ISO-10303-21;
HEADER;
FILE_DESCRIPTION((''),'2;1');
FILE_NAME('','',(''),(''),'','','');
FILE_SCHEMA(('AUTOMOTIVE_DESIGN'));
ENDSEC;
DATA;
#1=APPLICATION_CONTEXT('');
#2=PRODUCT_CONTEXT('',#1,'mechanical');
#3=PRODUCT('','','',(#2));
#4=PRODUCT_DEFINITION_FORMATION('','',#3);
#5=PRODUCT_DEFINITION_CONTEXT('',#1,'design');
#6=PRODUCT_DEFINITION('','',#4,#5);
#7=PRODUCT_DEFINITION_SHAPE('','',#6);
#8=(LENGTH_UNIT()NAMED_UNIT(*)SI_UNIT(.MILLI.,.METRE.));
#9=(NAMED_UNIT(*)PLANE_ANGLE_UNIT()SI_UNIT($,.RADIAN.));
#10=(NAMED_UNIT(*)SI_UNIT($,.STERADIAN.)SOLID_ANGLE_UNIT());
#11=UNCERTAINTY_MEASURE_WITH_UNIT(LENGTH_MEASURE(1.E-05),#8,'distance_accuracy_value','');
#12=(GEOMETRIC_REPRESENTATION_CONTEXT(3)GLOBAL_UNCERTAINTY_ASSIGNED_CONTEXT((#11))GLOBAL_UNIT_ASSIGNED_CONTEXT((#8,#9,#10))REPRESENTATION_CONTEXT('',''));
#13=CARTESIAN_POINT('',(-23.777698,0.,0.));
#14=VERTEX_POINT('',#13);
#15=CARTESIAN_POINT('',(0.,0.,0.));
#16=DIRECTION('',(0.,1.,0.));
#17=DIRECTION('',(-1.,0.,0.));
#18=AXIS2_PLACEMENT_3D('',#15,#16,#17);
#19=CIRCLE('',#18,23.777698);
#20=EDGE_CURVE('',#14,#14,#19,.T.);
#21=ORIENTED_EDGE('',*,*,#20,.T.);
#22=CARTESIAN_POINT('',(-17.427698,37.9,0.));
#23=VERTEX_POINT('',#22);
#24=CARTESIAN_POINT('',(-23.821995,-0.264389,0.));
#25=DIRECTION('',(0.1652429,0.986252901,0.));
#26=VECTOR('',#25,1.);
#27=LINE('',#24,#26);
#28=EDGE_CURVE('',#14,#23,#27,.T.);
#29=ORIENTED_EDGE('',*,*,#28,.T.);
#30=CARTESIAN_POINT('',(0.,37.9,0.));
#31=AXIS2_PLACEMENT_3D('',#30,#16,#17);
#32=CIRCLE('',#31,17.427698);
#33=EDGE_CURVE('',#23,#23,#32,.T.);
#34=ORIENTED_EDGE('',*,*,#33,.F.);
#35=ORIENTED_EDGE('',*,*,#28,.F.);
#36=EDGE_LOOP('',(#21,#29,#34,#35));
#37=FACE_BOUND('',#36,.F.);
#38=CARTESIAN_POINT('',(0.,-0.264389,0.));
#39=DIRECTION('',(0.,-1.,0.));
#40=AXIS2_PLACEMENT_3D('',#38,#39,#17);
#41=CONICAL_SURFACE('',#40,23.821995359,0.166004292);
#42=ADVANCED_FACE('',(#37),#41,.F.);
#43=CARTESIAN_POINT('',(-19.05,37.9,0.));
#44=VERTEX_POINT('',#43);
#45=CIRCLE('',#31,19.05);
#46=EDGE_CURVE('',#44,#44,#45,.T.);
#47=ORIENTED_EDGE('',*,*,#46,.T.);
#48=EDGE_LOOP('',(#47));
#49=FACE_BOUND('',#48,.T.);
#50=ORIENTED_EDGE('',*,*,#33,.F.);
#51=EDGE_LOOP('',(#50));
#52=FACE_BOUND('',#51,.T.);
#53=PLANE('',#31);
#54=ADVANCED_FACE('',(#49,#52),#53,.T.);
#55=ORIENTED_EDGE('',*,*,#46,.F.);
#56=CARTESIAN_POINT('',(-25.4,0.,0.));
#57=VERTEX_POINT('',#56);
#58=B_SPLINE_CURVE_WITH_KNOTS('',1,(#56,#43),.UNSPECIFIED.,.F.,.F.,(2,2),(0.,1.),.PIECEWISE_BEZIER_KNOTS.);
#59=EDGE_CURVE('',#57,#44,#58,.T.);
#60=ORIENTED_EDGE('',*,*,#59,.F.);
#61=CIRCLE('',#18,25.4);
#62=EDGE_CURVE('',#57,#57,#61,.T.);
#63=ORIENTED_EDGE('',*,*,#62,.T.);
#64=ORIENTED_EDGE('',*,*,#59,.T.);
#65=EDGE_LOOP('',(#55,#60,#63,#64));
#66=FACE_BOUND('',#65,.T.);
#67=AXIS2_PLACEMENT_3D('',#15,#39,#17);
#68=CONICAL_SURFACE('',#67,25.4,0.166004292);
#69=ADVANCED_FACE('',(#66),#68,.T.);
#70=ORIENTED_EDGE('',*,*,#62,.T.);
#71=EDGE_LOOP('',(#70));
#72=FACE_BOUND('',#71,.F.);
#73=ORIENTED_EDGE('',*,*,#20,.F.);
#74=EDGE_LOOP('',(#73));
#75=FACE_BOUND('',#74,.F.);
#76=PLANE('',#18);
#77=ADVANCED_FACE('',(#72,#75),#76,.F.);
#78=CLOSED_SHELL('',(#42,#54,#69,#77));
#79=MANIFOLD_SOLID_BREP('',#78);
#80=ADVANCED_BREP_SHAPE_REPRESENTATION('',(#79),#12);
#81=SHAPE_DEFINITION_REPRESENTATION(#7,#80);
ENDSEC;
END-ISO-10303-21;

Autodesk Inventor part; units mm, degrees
ref_plane "YZ Plane" through (0, 0, 0) normal (1, 0, 0) x (0, 1, 0)
ref_plane "XY Plane" through (0, 0, 0) normal (0, 0, 1) x (1, 0, 0)
sketch "Szkic6" plane through (0, 0, 0) normal (0, 1, 0) x (-1, 0, 0)
  circle A0 centre (0, 0) radius 25.4
  dimension "d33" = 50.8
ref_plane "Płaszczyzna konstrukcyjna1" through (0, 37.9, 0) normal (0, 1, 0) x (-1, 0, 0)
sketch "Szkic7" plane through (0, 37.9, 0) normal (0, 1, 0) x (-1, 0, 0)
  circle A0 centre (0, 0) radius 19.05
  dimension "d35" = 38.1
loft "Wyciągnięcie złożone1" add profiles "Szkic6", "Szkic7"
shell "Skorupa1" thickness 1.6 removed faces 2 at (5.6226, 37.9, 0.0883) at (7.2508, 0, -1.9085)
equation "\"d33\" = OD1"
equation "\"d35\" = OD2"
equation "\"d52\" = THK"
equation "\"SzerokośćGięciaPodcięcia\" = Grubość"
equation "\"RozmiarPodcięciaNarożnika\" = 4 * Grubość"
equation "\"PromieńPrzejścia\" = PromieńGięcia"
equation "\"Rozmiar_promienia_Jacobiego\" = PromieńGięcia"
equation "\"Wielk_odstępu\" = Grubość"
equation "\"d2\" = PromieńGięcia"
equation "\"d23\" = PromieńGięcia"
equation "\"OD1\" = 50.8"
equation "\"OD2\" = 38.1"
equation "\"L\" = 37.9"
equation "\"THK\" = 1.6"
equation "\"d34\" = L"
equation "\"Grubość\" = 1.5"
equation "\"PromieńGięcia\" = 3"
properties part number "Redukcja symetryczna Ø50,8x38,1x1,6 L=37,9" material "304"
